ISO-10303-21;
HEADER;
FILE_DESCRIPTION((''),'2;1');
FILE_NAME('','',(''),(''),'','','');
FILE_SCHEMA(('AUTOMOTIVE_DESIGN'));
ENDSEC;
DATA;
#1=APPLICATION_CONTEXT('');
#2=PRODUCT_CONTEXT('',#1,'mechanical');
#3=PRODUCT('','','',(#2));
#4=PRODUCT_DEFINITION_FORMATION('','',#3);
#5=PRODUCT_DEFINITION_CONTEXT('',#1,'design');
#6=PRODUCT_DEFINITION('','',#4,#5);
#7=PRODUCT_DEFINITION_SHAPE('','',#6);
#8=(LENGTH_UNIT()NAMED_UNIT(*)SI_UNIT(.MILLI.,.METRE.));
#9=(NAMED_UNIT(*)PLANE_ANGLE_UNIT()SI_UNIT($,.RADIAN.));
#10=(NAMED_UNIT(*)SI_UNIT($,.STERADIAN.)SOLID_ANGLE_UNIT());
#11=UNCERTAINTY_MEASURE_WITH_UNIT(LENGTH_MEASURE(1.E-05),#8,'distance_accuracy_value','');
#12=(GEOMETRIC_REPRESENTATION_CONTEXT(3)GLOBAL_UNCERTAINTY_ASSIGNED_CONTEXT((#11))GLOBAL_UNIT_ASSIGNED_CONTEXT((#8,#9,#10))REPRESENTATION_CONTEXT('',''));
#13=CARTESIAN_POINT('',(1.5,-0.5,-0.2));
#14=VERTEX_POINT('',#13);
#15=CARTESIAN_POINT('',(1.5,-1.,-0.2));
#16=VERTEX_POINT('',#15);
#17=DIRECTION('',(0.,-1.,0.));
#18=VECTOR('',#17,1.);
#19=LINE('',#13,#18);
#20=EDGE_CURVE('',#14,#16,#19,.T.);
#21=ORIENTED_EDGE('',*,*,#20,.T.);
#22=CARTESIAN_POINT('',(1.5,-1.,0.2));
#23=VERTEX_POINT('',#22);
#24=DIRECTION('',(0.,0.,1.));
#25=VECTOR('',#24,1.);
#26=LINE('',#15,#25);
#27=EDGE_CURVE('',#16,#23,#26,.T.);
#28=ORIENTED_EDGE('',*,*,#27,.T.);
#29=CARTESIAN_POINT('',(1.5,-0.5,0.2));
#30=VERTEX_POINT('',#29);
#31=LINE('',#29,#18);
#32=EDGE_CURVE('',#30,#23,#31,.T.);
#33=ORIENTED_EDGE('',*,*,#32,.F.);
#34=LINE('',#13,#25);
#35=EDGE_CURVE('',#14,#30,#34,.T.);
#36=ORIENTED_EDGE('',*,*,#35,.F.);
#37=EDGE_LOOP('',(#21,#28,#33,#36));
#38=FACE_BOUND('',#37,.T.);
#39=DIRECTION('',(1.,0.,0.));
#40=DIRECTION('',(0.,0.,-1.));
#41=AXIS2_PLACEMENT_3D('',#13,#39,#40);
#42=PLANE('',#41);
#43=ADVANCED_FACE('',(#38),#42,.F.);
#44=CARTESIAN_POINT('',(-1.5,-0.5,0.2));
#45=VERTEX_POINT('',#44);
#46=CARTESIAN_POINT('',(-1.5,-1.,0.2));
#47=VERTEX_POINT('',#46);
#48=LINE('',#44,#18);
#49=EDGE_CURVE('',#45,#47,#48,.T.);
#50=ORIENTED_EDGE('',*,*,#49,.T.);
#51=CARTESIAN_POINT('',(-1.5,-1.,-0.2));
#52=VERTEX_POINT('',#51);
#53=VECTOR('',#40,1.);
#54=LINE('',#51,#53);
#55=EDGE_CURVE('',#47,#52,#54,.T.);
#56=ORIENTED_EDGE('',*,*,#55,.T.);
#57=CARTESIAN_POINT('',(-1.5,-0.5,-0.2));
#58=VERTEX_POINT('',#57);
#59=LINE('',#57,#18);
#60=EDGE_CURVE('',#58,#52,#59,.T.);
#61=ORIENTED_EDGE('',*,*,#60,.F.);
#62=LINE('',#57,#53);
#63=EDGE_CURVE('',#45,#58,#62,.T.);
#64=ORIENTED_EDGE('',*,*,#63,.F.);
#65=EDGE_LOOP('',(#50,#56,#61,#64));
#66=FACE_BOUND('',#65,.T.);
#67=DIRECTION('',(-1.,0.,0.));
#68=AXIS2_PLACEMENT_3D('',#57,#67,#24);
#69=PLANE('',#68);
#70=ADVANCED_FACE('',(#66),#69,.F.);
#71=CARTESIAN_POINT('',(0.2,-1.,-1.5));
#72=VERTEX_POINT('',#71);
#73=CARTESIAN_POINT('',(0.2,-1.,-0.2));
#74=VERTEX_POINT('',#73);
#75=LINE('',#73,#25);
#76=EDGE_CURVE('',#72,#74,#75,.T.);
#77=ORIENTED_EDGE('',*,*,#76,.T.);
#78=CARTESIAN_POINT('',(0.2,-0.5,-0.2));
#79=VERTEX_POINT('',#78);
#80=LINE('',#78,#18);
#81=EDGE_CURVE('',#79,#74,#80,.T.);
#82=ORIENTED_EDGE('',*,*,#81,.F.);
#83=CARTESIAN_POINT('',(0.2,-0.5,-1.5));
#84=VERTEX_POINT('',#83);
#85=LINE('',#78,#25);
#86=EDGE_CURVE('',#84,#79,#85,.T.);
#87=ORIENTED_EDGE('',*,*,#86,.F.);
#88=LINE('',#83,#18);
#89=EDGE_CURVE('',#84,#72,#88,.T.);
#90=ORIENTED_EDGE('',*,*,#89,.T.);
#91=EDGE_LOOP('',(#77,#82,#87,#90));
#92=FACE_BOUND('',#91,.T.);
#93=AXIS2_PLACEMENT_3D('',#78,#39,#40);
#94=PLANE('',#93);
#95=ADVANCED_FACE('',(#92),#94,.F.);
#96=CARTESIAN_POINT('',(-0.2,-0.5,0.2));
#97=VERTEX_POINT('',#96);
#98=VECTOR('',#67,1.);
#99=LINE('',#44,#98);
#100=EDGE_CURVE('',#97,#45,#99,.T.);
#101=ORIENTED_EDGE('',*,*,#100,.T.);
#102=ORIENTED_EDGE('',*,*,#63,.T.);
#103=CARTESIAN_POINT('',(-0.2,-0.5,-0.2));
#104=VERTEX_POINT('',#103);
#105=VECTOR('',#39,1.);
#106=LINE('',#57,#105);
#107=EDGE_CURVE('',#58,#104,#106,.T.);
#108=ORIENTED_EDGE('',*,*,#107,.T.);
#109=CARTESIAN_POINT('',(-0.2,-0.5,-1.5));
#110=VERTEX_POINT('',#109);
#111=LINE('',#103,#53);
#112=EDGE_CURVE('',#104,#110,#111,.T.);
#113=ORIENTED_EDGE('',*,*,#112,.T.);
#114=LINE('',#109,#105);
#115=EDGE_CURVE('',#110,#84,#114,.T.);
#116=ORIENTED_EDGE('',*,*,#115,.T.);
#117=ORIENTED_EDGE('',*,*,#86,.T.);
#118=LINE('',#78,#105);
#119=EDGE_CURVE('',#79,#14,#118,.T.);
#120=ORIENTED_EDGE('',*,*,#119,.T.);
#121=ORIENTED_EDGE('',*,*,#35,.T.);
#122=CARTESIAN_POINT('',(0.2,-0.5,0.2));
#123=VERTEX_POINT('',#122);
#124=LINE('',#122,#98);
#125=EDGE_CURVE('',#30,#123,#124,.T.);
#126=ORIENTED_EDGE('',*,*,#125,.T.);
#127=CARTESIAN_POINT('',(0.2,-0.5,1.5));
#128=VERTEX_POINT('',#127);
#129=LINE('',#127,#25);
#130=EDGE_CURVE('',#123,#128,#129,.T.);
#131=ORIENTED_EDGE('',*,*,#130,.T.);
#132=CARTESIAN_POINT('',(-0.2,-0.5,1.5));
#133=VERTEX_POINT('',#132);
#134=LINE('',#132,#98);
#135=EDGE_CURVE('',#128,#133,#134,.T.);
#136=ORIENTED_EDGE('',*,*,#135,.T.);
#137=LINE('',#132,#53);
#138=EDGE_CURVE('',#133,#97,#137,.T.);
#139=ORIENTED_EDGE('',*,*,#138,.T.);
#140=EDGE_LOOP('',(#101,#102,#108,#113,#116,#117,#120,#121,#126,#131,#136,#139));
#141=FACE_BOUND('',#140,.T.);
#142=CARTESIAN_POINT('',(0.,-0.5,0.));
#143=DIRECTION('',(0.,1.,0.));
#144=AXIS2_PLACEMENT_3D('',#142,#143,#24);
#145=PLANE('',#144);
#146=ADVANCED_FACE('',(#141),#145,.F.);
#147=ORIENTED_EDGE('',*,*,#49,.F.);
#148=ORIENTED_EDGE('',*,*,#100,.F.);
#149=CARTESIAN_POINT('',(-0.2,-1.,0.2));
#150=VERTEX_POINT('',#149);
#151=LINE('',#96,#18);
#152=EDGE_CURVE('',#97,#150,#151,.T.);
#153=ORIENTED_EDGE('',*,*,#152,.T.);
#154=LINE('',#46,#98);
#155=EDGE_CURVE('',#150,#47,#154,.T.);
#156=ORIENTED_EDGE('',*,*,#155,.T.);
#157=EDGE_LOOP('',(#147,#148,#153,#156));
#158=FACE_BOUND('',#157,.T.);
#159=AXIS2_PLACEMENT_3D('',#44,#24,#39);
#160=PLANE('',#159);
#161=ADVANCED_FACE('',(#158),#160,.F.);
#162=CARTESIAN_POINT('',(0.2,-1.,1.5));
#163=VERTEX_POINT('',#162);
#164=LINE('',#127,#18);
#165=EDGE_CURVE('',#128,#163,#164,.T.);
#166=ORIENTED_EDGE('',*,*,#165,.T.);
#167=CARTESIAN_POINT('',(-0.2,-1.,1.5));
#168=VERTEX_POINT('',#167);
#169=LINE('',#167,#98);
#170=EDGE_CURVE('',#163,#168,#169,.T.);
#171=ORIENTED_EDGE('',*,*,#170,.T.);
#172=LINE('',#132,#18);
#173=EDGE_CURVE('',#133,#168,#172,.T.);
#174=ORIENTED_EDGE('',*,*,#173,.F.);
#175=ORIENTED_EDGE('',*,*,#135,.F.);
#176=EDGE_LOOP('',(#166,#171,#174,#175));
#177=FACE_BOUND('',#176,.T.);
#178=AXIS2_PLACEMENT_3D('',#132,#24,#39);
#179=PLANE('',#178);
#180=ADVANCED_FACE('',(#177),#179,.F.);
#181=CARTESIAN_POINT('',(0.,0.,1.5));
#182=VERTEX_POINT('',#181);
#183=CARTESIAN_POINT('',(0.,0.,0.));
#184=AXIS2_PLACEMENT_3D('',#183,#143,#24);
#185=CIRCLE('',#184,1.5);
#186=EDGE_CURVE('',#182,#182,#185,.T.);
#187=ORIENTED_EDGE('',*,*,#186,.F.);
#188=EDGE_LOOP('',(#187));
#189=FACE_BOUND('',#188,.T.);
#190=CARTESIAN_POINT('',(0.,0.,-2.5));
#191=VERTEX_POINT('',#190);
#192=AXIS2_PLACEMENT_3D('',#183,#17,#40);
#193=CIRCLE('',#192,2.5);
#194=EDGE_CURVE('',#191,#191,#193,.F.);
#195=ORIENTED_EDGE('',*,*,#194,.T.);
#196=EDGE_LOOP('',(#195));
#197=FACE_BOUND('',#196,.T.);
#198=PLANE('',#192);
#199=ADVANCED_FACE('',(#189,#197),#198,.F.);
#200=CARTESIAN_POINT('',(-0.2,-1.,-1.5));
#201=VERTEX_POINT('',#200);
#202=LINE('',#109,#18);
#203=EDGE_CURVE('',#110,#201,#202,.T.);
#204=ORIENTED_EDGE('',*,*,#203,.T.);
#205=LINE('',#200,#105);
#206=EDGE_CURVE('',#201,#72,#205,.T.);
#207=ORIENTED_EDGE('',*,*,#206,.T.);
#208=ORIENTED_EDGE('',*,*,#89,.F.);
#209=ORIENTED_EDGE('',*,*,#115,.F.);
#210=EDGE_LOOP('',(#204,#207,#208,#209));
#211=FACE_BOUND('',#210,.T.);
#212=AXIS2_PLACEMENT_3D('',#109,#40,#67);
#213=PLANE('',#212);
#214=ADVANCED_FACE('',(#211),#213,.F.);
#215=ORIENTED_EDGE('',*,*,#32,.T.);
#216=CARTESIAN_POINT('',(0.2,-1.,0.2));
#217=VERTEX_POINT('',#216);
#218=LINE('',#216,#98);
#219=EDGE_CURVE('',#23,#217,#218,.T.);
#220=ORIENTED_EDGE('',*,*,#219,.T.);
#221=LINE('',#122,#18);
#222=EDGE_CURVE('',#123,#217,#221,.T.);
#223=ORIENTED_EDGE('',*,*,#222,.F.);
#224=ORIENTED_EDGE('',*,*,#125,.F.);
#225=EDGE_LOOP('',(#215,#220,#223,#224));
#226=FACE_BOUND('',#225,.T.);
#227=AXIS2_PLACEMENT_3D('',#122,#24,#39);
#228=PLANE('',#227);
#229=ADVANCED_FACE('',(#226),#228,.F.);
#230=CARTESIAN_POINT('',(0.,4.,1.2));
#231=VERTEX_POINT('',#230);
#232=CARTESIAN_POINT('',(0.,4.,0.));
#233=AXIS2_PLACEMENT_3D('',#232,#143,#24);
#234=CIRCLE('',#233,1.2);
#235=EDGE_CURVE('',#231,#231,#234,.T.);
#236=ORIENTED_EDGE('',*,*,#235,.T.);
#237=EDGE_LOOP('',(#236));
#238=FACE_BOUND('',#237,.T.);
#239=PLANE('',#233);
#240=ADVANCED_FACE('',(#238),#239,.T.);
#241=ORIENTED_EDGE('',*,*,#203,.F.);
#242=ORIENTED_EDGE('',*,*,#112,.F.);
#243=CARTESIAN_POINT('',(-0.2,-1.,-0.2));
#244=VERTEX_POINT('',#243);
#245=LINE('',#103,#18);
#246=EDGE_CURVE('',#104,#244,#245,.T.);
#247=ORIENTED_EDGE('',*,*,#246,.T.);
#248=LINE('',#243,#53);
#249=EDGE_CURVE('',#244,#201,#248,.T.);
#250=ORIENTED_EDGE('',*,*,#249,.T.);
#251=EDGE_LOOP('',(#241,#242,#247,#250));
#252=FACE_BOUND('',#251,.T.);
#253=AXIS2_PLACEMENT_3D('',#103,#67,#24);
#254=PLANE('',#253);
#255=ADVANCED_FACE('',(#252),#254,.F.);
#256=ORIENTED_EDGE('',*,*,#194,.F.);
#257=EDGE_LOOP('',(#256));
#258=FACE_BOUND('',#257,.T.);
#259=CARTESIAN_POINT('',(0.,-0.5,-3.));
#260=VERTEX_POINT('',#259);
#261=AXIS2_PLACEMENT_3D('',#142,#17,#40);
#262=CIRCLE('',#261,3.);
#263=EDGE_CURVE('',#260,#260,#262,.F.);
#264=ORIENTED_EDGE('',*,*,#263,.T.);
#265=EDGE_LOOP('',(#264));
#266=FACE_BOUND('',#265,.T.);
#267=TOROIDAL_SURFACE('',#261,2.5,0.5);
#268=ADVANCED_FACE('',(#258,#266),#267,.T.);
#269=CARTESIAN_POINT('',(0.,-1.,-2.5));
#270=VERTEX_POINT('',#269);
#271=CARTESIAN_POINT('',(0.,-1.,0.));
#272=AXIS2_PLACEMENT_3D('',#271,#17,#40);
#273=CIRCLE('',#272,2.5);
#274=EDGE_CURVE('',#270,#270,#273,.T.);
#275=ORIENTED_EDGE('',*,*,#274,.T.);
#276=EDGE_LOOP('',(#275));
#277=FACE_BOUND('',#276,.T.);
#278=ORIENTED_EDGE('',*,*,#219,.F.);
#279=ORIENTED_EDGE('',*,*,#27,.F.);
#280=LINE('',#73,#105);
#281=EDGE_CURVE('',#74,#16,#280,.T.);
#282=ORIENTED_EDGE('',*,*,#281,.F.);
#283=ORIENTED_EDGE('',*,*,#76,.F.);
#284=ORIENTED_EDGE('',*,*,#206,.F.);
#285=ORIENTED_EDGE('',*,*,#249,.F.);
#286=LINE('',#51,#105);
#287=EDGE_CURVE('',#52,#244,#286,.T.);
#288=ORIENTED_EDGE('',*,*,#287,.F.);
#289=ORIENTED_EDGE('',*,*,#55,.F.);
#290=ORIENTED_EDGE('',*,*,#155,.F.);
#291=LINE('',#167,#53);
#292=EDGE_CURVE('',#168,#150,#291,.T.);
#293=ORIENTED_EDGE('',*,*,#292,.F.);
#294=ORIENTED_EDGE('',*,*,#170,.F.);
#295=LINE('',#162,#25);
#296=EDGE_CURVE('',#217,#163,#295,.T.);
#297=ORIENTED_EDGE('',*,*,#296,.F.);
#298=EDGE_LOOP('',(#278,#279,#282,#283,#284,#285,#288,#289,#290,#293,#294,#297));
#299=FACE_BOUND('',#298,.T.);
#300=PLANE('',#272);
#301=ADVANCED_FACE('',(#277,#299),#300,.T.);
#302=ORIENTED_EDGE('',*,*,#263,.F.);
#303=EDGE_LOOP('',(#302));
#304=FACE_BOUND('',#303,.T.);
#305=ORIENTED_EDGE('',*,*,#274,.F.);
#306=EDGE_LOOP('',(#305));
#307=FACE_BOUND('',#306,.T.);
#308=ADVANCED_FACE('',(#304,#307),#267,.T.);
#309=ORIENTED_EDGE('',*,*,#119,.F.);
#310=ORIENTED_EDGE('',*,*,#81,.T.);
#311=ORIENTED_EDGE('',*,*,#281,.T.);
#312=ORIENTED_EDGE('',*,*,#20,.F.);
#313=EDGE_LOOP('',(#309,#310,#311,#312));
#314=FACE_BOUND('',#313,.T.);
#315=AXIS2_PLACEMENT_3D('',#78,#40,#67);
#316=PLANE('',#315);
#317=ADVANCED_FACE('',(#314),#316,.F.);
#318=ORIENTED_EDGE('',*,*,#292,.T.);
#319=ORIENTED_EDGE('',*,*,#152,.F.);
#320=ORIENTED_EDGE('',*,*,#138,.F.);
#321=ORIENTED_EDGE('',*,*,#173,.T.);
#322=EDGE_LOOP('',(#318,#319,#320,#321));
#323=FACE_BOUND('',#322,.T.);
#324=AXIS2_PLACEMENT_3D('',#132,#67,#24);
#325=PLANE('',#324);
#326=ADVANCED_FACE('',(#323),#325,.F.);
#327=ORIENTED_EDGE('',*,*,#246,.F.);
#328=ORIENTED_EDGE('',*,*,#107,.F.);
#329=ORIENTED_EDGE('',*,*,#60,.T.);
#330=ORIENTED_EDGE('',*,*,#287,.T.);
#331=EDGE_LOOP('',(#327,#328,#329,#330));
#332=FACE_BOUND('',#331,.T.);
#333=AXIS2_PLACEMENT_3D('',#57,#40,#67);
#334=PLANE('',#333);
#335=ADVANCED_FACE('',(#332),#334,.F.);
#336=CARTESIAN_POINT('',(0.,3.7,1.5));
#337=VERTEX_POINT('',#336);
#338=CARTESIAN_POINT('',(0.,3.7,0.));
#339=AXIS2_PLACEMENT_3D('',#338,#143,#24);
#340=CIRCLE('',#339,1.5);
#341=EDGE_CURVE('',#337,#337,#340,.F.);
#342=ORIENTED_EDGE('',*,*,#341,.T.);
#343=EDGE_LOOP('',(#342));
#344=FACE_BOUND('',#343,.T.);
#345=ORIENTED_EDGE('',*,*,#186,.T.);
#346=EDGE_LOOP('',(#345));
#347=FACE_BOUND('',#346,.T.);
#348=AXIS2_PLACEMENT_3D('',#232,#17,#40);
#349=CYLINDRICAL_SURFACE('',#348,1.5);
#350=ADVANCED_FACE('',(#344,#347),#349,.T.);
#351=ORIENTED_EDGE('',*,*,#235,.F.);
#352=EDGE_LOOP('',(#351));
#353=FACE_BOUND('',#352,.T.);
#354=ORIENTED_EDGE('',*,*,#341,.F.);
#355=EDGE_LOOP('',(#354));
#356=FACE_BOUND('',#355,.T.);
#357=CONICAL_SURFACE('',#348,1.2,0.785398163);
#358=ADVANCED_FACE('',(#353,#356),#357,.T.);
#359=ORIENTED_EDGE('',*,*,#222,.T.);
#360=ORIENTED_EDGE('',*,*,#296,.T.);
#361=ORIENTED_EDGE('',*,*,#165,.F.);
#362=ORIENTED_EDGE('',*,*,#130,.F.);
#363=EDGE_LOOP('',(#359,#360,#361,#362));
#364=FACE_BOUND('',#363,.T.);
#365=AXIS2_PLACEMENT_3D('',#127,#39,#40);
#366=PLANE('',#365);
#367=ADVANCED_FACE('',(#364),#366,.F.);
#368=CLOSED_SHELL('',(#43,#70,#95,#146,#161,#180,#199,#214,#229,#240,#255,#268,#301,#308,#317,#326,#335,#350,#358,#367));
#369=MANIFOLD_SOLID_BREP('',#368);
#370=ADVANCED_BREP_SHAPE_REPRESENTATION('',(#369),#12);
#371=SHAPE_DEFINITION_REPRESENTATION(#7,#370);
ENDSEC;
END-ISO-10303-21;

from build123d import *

# Parameters (mm, degrees)
SKETCH_2_R          = 1.5
EXTRUDE_1_DEPTH     = 4
SKETCH_3_R          = 3
EXTRUDE_2_DEPTH     = 1
FILLET_1_R          = 0.5
CUT_EXTRUDE_2_DEPTH = 0.5
CHAMFER_1_SIZE      = 0.3


with BuildPart() as part:
    # 草图2 → 凸台-拉伸1 (new body)
    with BuildSketch(Plane(origin=(0, 0, 0), x_dir=(1, 0, 0), z_dir=(0, 1, 0))):
        with Locations(Location((0, 0, 0), (0, 0, 270))):
            Circle(SKETCH_2_R)
    extrude(amount=EXTRUDE_1_DEPTH)

    # 草图3 → 凸台-拉伸2 (add)
    with BuildSketch(Plane.XZ):
        with Locations(Location((0, 0, 0), (0, 0, 270))):
            Circle(SKETCH_3_R)
    extrude(amount=EXTRUDE_2_DEPTH)

    # 圆角1
    fillet_1_edges = [part.edges().sort_by_distance(p)[0] for p in [
        (0, 0, 3),
        (0, -1, 3),
    ]]
    fillet(fillet_1_edges, radius=FILLET_1_R - 0.0001)  # a hair under: the kernel refuses the full size

    # 草图4 → 切除-拉伸2 (cut)
    with BuildSketch(Plane.XZ.offset(1)):
        Polygon((-1.5, -0.2), (-0.2, -0.2), (-0.2, -1.5), (0.2, -1.5), (0.2, -0.2), (1.5, -0.2), (1.5, 0.2), (0.2, 0.2), (0.2, 1.5), (-0.2, 1.5), (-0.2, 0.2), (-1.5, 0.2), align=None)
    extrude(amount=-CUT_EXTRUDE_2_DEPTH, mode=Mode.SUBTRACT)

    # 倒角1
    chamfer_1_edges = [part.edges().sort_by_distance(p)[0] for p in [
        (0, 4, -1.5),
    ]]
    chamfer(chamfer_1_edges, length=CHAMFER_1_SIZE)


solid = part.part
